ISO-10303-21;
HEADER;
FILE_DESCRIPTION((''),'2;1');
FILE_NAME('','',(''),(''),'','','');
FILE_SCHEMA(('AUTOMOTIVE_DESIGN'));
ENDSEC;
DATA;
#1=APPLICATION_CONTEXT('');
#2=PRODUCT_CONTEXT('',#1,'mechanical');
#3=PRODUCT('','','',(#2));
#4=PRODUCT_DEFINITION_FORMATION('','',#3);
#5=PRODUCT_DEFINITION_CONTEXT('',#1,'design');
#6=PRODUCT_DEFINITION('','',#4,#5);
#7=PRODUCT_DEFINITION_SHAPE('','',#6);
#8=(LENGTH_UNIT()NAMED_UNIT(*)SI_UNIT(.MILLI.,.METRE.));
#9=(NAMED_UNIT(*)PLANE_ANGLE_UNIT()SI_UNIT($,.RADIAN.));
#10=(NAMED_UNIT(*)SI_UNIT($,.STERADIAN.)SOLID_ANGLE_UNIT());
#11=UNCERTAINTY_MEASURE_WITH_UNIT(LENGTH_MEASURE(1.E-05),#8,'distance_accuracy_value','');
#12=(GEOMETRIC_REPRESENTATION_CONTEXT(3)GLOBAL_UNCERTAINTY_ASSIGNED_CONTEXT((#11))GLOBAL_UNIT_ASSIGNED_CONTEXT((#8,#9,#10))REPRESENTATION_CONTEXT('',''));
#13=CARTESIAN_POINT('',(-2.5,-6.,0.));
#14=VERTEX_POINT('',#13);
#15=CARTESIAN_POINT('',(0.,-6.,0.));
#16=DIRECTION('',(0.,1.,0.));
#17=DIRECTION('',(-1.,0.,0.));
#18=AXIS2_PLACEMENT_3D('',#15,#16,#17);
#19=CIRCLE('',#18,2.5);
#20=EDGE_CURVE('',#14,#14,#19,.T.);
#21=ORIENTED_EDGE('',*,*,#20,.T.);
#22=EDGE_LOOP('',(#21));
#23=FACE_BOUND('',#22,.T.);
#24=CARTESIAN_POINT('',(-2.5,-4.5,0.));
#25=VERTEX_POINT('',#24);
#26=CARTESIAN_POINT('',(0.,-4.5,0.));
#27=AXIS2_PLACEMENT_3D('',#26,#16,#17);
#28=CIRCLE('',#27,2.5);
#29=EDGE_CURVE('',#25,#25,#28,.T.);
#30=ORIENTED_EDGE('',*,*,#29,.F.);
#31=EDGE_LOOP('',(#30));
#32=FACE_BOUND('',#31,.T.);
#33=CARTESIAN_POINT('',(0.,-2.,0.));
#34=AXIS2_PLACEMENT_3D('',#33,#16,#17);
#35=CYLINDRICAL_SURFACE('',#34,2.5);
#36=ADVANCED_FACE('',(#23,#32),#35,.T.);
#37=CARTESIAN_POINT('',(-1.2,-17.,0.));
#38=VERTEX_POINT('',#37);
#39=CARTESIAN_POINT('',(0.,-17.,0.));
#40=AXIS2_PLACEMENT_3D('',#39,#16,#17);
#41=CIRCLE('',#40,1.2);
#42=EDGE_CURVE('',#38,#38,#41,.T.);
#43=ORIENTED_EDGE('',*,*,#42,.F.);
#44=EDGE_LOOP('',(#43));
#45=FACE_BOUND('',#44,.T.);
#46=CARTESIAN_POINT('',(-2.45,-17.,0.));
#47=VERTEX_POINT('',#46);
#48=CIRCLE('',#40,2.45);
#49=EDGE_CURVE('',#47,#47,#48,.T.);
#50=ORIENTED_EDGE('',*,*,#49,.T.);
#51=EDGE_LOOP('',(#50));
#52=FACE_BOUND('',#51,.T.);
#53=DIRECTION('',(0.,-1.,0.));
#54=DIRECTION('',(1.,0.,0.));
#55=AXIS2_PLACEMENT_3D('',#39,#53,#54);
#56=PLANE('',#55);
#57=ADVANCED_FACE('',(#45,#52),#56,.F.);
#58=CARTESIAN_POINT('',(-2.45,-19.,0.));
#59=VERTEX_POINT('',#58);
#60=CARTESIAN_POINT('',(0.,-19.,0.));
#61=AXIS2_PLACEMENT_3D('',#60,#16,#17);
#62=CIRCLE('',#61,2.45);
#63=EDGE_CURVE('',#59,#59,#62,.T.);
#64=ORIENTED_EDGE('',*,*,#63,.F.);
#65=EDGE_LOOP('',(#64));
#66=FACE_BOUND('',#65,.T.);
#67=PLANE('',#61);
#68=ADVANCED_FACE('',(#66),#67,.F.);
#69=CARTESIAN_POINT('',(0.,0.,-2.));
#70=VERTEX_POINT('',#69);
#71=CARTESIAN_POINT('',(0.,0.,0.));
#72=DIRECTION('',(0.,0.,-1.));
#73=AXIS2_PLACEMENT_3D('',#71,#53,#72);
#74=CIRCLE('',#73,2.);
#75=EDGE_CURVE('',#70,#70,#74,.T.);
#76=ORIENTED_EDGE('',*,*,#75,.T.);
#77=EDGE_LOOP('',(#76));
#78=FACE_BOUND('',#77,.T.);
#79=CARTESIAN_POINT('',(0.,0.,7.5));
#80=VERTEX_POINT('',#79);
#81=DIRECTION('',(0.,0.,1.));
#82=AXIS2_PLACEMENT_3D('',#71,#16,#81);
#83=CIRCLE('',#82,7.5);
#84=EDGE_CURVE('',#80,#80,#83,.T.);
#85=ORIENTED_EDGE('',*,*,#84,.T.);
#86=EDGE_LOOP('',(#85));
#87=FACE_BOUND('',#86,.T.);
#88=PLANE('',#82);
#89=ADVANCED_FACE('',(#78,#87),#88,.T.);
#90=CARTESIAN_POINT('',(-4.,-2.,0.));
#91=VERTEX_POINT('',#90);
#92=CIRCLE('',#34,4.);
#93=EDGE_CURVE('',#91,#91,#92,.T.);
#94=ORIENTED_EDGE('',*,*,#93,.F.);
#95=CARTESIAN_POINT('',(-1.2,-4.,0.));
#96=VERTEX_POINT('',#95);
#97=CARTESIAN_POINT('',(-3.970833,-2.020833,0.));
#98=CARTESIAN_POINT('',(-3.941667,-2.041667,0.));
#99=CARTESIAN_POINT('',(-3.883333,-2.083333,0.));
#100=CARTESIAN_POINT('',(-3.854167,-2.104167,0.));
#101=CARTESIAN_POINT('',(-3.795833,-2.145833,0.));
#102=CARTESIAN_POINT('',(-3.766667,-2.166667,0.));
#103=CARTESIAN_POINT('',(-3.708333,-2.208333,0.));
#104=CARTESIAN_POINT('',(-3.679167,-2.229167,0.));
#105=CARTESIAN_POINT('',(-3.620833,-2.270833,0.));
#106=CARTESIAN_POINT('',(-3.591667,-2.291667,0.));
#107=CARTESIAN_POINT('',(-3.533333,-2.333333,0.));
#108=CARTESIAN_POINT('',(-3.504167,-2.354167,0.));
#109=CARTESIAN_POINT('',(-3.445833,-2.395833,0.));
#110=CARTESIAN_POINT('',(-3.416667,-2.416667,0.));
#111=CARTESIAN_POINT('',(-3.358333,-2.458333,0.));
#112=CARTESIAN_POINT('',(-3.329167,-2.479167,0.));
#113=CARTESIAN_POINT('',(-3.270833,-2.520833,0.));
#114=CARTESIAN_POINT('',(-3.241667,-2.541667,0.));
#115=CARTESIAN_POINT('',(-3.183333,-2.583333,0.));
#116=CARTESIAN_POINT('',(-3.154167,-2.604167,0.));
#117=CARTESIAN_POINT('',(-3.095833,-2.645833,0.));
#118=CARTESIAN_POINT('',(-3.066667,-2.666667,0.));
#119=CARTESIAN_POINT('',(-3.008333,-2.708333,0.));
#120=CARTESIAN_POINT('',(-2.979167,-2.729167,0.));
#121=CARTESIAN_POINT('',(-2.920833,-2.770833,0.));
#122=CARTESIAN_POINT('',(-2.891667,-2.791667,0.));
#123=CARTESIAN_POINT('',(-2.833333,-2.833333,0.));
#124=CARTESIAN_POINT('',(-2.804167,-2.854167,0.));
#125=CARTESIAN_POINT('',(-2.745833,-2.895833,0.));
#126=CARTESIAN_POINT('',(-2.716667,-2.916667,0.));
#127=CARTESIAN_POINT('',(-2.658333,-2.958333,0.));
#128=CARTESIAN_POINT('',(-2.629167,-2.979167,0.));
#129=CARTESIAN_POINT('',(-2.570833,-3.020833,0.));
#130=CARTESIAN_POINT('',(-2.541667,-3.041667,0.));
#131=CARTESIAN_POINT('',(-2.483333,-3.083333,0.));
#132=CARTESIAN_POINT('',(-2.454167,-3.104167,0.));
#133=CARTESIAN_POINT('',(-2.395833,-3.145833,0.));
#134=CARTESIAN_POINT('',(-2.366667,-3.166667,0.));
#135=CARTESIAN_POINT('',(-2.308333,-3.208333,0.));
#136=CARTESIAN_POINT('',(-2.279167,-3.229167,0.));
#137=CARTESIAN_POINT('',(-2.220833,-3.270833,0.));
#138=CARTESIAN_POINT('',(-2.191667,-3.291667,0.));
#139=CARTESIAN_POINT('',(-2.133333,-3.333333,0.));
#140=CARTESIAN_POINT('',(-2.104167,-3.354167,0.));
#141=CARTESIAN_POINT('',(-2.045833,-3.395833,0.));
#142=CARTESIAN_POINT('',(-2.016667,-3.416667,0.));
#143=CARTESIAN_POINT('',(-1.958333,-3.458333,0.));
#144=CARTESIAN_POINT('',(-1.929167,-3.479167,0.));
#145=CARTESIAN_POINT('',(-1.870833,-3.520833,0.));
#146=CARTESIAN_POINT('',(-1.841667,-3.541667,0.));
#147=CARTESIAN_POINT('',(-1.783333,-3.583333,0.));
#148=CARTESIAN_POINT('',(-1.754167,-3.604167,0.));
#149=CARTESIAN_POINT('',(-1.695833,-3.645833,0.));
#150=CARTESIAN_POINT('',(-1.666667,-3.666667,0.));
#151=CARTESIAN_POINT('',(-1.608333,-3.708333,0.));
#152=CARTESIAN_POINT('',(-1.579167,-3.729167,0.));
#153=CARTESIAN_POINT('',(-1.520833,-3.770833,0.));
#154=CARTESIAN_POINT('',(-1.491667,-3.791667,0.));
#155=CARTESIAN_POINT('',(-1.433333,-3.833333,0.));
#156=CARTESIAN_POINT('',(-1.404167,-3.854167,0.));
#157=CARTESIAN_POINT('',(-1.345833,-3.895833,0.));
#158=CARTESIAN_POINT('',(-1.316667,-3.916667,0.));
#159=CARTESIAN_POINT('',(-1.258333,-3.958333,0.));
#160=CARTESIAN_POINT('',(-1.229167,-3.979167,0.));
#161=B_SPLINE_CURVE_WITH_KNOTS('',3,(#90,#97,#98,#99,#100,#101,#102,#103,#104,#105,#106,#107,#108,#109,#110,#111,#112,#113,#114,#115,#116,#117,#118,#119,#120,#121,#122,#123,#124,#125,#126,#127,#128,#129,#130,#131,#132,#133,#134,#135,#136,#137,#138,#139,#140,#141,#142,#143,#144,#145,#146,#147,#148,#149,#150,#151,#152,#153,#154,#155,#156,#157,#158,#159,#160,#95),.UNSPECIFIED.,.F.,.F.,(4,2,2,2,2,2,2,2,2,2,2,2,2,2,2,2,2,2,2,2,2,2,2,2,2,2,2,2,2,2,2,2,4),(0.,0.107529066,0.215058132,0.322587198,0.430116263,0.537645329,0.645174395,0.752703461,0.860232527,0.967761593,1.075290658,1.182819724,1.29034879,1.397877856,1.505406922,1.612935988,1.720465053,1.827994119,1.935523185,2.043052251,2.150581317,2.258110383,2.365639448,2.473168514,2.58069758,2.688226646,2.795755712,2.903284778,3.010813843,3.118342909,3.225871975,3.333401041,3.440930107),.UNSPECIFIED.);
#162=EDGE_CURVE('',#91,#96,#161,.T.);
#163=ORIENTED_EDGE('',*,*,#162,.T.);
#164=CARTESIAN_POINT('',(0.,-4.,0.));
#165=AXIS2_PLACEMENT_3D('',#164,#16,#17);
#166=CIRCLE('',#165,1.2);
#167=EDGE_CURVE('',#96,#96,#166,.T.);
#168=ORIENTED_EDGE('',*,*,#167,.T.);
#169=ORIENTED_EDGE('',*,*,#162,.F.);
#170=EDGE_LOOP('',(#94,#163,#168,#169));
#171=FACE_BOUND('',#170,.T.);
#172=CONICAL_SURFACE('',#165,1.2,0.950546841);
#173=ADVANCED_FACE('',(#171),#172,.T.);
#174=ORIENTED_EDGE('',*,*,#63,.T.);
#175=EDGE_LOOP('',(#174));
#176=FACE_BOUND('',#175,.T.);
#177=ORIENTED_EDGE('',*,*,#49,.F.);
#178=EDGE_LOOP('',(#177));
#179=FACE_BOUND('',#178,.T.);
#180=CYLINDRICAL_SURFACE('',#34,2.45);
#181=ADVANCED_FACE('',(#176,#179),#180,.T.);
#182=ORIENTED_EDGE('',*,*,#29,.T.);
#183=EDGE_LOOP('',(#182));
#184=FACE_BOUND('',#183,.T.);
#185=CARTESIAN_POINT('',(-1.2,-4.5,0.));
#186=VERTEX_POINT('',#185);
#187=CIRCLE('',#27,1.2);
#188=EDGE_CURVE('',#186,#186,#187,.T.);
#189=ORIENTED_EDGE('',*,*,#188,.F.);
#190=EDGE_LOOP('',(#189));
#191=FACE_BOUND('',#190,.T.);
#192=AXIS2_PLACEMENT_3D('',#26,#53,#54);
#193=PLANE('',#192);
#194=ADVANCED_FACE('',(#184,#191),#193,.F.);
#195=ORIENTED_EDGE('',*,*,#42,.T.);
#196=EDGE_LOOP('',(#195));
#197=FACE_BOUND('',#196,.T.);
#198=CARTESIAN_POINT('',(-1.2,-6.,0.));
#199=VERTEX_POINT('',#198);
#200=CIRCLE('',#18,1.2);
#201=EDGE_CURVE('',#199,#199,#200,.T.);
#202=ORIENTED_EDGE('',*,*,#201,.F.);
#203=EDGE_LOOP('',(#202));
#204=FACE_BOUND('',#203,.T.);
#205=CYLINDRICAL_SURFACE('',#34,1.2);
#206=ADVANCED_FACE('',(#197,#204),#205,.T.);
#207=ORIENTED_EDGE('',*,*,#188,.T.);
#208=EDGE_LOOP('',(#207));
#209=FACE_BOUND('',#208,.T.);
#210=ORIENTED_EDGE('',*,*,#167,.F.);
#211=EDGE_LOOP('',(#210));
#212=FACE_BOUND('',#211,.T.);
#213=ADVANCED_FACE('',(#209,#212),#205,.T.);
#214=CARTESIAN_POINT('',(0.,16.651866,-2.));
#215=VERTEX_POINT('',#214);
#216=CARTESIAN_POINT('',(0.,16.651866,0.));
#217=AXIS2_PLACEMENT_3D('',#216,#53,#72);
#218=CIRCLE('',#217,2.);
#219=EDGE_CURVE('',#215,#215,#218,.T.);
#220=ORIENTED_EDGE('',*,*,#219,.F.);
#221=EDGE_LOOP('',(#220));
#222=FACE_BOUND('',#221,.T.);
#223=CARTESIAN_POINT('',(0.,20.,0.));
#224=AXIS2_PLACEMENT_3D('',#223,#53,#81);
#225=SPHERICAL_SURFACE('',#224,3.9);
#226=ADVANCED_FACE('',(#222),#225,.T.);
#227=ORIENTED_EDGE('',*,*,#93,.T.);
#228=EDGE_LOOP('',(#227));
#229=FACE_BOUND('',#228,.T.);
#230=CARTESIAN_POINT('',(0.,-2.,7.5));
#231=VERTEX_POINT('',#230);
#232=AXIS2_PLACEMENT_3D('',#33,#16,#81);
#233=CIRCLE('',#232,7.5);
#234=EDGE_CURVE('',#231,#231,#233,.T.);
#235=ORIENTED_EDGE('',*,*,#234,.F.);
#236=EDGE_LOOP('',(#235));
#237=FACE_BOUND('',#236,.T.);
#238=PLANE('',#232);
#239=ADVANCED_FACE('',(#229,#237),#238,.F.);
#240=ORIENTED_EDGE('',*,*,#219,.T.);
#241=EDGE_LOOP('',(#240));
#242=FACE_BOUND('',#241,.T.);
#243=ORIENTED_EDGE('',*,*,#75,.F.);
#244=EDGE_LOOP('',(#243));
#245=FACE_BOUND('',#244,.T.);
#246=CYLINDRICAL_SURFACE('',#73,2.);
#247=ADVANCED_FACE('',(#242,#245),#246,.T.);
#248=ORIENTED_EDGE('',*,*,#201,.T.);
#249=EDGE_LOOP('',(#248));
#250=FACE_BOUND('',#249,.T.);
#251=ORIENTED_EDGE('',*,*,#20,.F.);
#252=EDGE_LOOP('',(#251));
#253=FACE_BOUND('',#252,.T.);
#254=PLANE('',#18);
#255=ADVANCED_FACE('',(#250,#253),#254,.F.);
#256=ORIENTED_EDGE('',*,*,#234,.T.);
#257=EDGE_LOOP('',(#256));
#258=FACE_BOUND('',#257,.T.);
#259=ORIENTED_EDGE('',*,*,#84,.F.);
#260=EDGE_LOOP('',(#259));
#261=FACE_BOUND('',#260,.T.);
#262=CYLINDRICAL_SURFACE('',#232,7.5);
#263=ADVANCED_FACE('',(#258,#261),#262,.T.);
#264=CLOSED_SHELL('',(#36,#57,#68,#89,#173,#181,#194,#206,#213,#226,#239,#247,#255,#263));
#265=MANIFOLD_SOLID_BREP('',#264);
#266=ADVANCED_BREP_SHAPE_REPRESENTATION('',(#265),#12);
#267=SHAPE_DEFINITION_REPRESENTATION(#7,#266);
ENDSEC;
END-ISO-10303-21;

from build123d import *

# Parameters (mm, degrees)
SKETCH3_R           = 7.5
BOSS_EXTRUDE1_DEPTH = 2


with BuildPart() as part:
    # Sketch3 → Boss-Extrude1 (new body)
    with BuildSketch(Plane(origin=(0, 0, 0), x_dir=(1, 0, 0), z_dir=(0, 1, 0))):
        Circle(SKETCH3_R)
    extrude(amount=-BOSS_EXTRUDE1_DEPTH)

    # Sketch4 → Revolve3 (revolve)
    with BuildSketch(Plane.XY):
        Polygon((0, -19), (0, -2), (-4, -2), (-1.2, -4), (-1.2, -4.5), (-2.5, -4.5), (-2.5, -6), (-1.2, -6), (-1.2, -17), (-2.45, -17), (-2.45, -19), align=None)
    revolve(axis=Axis((0, -2, 0), (0, -1, 0)))

    # Sketch5 → Revolve4 (revolve)
    with BuildSketch(Plane(origin=(0, 0, 0), x_dir=(0, 0, -1), z_dir=(1, 0, 0))):
        with BuildLine():
            Line((-2, 0), (0, 0))
            Line((0, 0), (0, 23.9))
            ThreePointArc((0, 23.9), (-3.75950275, 21.037371232), (-2, 16.651866191))
            Line((-2, 16.651866191), (-2, 0))
        make_face()
    revolve(axis=Axis((0, 0, 0), (0, 1, 0)))


solid = part.part
